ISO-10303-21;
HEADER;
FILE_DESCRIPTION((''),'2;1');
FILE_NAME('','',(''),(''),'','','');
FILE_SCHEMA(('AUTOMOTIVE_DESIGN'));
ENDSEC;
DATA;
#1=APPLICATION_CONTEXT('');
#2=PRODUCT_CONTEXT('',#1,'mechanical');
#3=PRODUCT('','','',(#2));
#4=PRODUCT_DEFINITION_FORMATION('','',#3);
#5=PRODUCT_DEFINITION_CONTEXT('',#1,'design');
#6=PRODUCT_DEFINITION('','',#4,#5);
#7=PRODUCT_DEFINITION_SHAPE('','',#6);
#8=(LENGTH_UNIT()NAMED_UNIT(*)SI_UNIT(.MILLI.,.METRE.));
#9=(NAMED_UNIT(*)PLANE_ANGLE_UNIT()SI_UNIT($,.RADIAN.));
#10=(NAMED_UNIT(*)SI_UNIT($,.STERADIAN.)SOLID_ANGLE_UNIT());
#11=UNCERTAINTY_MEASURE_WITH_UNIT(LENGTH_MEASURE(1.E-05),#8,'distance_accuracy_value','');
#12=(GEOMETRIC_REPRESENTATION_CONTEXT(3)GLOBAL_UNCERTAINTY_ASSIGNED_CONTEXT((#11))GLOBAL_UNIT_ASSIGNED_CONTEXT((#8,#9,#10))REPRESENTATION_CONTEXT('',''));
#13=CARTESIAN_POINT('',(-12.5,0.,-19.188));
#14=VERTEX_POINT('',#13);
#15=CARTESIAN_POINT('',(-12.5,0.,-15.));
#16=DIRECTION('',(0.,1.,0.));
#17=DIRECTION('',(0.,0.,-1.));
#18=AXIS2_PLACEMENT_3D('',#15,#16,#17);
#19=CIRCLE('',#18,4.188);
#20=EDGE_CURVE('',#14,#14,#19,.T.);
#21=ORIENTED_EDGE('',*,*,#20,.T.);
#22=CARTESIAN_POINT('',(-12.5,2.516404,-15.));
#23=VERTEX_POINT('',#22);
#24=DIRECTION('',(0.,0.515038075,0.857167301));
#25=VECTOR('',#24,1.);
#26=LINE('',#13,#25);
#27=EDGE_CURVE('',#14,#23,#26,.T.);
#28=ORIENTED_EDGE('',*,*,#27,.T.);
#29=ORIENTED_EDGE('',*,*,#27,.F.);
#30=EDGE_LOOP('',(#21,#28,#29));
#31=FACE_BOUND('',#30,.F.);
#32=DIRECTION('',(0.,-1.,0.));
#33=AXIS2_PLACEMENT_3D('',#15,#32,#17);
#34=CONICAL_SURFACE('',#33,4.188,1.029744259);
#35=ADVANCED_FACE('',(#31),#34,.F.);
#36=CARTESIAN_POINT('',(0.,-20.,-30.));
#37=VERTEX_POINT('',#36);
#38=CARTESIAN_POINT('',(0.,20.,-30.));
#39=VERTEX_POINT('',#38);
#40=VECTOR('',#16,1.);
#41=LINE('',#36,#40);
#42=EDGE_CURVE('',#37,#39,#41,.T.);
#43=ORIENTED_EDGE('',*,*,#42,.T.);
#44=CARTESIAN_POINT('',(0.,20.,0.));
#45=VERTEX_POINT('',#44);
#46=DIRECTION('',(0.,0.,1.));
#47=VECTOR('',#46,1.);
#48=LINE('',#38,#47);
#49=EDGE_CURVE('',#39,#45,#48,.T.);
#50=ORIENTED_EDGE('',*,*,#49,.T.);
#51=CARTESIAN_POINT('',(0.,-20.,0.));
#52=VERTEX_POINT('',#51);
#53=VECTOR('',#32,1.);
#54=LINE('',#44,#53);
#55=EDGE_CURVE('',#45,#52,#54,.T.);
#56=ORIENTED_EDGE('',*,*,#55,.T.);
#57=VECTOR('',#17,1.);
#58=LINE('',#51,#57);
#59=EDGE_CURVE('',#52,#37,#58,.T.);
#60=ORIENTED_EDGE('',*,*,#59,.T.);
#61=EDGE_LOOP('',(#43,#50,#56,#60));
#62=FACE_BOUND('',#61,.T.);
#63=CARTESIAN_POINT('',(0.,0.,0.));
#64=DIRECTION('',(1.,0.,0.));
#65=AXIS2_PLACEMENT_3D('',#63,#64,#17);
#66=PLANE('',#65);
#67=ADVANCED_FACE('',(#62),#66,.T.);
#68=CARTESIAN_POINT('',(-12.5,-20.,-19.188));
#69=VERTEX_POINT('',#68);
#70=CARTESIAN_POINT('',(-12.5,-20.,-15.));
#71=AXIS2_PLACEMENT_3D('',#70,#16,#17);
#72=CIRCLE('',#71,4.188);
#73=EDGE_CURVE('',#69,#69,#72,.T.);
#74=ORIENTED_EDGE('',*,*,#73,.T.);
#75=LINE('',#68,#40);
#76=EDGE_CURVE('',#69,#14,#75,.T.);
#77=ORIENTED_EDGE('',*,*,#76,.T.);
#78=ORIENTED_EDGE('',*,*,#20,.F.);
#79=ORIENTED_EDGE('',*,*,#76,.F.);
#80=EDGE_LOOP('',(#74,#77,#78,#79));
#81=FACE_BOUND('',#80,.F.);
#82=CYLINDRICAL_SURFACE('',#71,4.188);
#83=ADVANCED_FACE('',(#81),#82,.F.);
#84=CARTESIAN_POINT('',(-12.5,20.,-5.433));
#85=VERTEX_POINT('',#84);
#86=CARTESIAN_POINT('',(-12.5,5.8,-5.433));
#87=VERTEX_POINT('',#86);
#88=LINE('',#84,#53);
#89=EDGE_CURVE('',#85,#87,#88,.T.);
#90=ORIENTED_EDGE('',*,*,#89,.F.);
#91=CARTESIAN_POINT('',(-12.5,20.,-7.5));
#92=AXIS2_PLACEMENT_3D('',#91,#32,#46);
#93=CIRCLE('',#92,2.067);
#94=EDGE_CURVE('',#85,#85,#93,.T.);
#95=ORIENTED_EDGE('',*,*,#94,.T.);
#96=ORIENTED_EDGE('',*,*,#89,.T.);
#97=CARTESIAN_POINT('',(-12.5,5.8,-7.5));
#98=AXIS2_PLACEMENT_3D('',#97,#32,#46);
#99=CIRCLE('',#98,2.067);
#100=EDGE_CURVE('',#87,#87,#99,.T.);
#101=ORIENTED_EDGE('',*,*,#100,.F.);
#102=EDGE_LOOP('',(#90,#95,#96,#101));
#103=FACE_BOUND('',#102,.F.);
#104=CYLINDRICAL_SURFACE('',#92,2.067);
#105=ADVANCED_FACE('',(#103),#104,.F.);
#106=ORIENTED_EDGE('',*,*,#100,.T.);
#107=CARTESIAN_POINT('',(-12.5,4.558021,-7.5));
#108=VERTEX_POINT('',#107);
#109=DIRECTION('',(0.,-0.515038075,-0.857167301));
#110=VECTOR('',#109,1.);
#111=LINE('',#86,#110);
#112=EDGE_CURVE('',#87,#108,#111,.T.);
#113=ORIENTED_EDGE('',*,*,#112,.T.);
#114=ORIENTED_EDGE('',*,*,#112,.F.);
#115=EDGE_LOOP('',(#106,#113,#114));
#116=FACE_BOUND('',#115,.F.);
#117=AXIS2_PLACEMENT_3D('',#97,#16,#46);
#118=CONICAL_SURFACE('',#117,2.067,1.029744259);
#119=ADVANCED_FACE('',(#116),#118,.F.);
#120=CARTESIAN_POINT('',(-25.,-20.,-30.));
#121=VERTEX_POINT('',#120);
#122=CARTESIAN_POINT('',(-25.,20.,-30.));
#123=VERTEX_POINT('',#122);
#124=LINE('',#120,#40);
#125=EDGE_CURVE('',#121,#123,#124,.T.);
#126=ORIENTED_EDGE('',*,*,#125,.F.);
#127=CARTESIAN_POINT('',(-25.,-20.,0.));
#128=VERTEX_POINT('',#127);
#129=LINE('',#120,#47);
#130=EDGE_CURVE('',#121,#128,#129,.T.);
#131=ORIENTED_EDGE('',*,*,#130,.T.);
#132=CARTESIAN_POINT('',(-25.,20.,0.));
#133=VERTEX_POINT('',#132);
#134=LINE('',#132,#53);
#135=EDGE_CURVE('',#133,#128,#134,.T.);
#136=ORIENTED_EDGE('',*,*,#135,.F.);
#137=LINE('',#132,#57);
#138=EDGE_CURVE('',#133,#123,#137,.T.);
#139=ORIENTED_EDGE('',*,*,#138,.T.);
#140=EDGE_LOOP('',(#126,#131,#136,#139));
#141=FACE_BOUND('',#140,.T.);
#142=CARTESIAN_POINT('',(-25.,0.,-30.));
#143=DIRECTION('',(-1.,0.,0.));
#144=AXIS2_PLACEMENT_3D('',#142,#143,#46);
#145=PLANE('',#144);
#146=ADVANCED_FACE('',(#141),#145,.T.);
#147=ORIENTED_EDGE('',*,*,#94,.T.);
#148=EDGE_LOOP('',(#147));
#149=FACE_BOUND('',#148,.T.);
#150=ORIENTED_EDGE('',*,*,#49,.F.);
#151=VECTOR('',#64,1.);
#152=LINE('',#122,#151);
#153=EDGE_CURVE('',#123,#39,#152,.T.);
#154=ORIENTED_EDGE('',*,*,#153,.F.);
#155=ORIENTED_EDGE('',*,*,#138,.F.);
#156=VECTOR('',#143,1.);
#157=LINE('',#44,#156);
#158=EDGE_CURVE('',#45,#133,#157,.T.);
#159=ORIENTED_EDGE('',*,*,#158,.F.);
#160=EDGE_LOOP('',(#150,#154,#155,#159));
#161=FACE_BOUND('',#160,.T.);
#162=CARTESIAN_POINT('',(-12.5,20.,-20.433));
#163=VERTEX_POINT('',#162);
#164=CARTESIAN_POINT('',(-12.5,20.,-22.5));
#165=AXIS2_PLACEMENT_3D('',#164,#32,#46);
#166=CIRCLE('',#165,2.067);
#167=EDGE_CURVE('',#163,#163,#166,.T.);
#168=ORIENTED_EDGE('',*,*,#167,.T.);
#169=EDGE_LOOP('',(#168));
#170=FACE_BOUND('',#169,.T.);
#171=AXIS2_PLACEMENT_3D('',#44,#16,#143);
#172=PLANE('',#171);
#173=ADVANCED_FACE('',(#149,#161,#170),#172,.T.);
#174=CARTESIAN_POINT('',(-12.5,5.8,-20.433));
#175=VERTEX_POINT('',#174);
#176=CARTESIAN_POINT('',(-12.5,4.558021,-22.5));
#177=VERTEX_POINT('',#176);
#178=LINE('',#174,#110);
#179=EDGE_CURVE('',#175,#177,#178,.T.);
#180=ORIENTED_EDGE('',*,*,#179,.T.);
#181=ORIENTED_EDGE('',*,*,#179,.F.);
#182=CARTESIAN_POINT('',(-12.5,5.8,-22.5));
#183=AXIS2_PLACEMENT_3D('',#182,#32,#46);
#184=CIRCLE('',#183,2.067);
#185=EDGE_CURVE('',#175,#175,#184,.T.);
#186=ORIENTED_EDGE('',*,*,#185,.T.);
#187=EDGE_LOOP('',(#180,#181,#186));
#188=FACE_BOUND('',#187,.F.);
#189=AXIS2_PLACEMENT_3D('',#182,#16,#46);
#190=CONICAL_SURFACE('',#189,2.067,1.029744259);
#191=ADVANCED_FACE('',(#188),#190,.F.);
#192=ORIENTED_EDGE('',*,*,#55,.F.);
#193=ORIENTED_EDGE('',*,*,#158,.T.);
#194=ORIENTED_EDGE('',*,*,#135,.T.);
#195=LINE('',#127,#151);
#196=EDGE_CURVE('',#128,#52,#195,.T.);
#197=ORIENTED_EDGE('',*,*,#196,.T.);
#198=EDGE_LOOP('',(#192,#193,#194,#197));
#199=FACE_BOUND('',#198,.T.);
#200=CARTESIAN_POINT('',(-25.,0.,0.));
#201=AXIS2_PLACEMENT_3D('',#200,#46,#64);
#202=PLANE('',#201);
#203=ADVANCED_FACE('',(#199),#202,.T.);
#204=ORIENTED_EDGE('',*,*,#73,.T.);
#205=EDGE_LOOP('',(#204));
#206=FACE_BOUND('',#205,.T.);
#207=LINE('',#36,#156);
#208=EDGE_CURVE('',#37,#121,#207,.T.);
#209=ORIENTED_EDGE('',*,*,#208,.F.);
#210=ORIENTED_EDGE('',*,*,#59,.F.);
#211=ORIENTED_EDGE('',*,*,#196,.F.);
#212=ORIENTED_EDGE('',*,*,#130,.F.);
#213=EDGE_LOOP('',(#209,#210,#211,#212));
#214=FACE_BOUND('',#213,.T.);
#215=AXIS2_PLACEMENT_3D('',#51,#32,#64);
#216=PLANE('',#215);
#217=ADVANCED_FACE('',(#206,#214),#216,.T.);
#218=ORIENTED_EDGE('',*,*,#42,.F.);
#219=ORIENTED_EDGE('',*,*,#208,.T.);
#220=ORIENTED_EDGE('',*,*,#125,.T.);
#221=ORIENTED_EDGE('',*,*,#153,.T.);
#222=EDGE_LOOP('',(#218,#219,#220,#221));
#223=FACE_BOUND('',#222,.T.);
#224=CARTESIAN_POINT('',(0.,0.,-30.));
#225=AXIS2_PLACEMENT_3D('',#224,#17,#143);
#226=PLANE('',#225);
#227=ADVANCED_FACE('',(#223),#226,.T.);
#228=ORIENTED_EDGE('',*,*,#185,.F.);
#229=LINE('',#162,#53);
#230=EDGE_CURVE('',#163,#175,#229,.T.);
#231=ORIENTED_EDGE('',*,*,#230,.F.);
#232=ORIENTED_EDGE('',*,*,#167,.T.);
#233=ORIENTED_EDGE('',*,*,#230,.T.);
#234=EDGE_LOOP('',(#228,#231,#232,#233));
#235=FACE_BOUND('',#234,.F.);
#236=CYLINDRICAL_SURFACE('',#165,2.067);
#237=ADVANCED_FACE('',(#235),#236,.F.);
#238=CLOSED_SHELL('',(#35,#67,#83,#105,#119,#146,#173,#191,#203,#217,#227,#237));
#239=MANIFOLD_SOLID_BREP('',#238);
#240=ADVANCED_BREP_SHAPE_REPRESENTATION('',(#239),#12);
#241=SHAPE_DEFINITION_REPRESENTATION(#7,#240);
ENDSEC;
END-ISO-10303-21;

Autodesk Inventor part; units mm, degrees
ref_plane "YZ Plane" through (0, 0, 0) normal (1, 0, 0) x (0, 1, 0)
ref_plane "XZ Plane" through (0, 0, 0) normal (0, 1, 0) x (-1, 0, 0)
ref_plane "XY Plane" through (0, 0, 0) normal (0, 0, 1) x (1, 0, 0)
sketch "Esboço1" plane through (0, 0, 0) normal (0, 1, 0) x (-1, 0, 0)
  line L0 (0, 0) -> (25, 0)
  line L1 (25, 0) -> (25, -30)
  line L2 (25, -30) -> (0, -30)
  line L3 (0, -30) -> (0, 0)
  dimension "d0" = 25
  dimension "d1" = 30
extrude "Extrusão1" add sketch "Esboço1" along normal blind 20
sketch "Esboço2" plane through (0, 20, 0) normal (0, 1, 0) x (1, 0, 0)
  line L0 (0, 30) -> (-25, 30) projected
  line L1 (-25, 30) -> (-25, 0) projected
  line L2 (-25, 0) -> (0, 0) projected
  point P0 (-12.5, 7.5)
  point P1 (-12.5, 22.5)
  point P2 (-12.5, 30)
  point P3 (-12.5, 0)
  dimension "d4" = 25
  dimension "d5" = 12.5
  dimension "d6" = 12.5
  dimension "d31" = 7.5
  dimension "d32" = 7.5
hole "Furo1" at (-12.5, 20, -7.5) at (-12.5, 20, -22.5) direction (0, -1, 0) diameter 4.134 depth 14.2 tip angle 118 thread size "M5x0.8" class "6H" standard "ISO Metric profile"
sketch "Esboço3" plane through (0, 0, 0) normal (0, -1, 0) x (1, 0, 0)
  circle A0 centre (-12.5, -15) radius 7.5 construction
  line L0 (0, 0) -> (0, -30) projected
  line L1 (0, -30) -> (-25, -30) projected
  line L2 (-25, -30) -> (-25, 0) projected
  line L3 (0, -30) -> (-25, -30) projected
  line L4 (0, 0) -> (0, -30) projected
  line L5 (-25, 0) -> (0, 0) projected
  dimension "d16" = 25
  dimension "d17" = 30
  dimension "d18" = 12.5
  dimension "d19" = 15
  dimension "d21" = 15
extrude "Extrusão2" add sketch "Esboço3" along normal blind 20
sketch "Esboço5" plane through (-12.5, -20, -15) normal (0, -1, 0) x (1, 0, 0)
  circle A0 centre (0, 0) radius 7.5 projected
  point P0 (12.5, 15)
hole "Furo3" at (-12.5, -20, -15) direction (0, 1, 0) diameter 8.376 depth 20 tip angle 118 thread size "M10x1.5" class "6H" standard "ISO Metric profile"
equation "\"d6\" = d5"
equation "\"d32\" = d31"
equation "\"d18\" = 0.5 * d16"
equation "\"d19\" = 0.5 * d17"
equation "\"Raio_vergadura\" = Espessura"
equation "\"Largura_alívio_de_vergadura\" = Espessura"
equation "\"Profundidade_alívio_de_vergadura\" = 0.5 * Espessura"
equation "\"Tamanho_alívio_de_dobra\" = 4 * Espessura"
equation "\"Remanescente_mínimo\" = 2 * Espessura"
equation "\"Raiodetransição\" = Raio_vergadura"
equation "\"Tamanho_de_raio_de_Jacobi\" = Raio_vergadura"
equation "\"TamanhoFolga\" = Espessura"
equation "\"Espessura\" = 0.5"
properties part number "Suporte da probe" material "Alumínio 6061"
